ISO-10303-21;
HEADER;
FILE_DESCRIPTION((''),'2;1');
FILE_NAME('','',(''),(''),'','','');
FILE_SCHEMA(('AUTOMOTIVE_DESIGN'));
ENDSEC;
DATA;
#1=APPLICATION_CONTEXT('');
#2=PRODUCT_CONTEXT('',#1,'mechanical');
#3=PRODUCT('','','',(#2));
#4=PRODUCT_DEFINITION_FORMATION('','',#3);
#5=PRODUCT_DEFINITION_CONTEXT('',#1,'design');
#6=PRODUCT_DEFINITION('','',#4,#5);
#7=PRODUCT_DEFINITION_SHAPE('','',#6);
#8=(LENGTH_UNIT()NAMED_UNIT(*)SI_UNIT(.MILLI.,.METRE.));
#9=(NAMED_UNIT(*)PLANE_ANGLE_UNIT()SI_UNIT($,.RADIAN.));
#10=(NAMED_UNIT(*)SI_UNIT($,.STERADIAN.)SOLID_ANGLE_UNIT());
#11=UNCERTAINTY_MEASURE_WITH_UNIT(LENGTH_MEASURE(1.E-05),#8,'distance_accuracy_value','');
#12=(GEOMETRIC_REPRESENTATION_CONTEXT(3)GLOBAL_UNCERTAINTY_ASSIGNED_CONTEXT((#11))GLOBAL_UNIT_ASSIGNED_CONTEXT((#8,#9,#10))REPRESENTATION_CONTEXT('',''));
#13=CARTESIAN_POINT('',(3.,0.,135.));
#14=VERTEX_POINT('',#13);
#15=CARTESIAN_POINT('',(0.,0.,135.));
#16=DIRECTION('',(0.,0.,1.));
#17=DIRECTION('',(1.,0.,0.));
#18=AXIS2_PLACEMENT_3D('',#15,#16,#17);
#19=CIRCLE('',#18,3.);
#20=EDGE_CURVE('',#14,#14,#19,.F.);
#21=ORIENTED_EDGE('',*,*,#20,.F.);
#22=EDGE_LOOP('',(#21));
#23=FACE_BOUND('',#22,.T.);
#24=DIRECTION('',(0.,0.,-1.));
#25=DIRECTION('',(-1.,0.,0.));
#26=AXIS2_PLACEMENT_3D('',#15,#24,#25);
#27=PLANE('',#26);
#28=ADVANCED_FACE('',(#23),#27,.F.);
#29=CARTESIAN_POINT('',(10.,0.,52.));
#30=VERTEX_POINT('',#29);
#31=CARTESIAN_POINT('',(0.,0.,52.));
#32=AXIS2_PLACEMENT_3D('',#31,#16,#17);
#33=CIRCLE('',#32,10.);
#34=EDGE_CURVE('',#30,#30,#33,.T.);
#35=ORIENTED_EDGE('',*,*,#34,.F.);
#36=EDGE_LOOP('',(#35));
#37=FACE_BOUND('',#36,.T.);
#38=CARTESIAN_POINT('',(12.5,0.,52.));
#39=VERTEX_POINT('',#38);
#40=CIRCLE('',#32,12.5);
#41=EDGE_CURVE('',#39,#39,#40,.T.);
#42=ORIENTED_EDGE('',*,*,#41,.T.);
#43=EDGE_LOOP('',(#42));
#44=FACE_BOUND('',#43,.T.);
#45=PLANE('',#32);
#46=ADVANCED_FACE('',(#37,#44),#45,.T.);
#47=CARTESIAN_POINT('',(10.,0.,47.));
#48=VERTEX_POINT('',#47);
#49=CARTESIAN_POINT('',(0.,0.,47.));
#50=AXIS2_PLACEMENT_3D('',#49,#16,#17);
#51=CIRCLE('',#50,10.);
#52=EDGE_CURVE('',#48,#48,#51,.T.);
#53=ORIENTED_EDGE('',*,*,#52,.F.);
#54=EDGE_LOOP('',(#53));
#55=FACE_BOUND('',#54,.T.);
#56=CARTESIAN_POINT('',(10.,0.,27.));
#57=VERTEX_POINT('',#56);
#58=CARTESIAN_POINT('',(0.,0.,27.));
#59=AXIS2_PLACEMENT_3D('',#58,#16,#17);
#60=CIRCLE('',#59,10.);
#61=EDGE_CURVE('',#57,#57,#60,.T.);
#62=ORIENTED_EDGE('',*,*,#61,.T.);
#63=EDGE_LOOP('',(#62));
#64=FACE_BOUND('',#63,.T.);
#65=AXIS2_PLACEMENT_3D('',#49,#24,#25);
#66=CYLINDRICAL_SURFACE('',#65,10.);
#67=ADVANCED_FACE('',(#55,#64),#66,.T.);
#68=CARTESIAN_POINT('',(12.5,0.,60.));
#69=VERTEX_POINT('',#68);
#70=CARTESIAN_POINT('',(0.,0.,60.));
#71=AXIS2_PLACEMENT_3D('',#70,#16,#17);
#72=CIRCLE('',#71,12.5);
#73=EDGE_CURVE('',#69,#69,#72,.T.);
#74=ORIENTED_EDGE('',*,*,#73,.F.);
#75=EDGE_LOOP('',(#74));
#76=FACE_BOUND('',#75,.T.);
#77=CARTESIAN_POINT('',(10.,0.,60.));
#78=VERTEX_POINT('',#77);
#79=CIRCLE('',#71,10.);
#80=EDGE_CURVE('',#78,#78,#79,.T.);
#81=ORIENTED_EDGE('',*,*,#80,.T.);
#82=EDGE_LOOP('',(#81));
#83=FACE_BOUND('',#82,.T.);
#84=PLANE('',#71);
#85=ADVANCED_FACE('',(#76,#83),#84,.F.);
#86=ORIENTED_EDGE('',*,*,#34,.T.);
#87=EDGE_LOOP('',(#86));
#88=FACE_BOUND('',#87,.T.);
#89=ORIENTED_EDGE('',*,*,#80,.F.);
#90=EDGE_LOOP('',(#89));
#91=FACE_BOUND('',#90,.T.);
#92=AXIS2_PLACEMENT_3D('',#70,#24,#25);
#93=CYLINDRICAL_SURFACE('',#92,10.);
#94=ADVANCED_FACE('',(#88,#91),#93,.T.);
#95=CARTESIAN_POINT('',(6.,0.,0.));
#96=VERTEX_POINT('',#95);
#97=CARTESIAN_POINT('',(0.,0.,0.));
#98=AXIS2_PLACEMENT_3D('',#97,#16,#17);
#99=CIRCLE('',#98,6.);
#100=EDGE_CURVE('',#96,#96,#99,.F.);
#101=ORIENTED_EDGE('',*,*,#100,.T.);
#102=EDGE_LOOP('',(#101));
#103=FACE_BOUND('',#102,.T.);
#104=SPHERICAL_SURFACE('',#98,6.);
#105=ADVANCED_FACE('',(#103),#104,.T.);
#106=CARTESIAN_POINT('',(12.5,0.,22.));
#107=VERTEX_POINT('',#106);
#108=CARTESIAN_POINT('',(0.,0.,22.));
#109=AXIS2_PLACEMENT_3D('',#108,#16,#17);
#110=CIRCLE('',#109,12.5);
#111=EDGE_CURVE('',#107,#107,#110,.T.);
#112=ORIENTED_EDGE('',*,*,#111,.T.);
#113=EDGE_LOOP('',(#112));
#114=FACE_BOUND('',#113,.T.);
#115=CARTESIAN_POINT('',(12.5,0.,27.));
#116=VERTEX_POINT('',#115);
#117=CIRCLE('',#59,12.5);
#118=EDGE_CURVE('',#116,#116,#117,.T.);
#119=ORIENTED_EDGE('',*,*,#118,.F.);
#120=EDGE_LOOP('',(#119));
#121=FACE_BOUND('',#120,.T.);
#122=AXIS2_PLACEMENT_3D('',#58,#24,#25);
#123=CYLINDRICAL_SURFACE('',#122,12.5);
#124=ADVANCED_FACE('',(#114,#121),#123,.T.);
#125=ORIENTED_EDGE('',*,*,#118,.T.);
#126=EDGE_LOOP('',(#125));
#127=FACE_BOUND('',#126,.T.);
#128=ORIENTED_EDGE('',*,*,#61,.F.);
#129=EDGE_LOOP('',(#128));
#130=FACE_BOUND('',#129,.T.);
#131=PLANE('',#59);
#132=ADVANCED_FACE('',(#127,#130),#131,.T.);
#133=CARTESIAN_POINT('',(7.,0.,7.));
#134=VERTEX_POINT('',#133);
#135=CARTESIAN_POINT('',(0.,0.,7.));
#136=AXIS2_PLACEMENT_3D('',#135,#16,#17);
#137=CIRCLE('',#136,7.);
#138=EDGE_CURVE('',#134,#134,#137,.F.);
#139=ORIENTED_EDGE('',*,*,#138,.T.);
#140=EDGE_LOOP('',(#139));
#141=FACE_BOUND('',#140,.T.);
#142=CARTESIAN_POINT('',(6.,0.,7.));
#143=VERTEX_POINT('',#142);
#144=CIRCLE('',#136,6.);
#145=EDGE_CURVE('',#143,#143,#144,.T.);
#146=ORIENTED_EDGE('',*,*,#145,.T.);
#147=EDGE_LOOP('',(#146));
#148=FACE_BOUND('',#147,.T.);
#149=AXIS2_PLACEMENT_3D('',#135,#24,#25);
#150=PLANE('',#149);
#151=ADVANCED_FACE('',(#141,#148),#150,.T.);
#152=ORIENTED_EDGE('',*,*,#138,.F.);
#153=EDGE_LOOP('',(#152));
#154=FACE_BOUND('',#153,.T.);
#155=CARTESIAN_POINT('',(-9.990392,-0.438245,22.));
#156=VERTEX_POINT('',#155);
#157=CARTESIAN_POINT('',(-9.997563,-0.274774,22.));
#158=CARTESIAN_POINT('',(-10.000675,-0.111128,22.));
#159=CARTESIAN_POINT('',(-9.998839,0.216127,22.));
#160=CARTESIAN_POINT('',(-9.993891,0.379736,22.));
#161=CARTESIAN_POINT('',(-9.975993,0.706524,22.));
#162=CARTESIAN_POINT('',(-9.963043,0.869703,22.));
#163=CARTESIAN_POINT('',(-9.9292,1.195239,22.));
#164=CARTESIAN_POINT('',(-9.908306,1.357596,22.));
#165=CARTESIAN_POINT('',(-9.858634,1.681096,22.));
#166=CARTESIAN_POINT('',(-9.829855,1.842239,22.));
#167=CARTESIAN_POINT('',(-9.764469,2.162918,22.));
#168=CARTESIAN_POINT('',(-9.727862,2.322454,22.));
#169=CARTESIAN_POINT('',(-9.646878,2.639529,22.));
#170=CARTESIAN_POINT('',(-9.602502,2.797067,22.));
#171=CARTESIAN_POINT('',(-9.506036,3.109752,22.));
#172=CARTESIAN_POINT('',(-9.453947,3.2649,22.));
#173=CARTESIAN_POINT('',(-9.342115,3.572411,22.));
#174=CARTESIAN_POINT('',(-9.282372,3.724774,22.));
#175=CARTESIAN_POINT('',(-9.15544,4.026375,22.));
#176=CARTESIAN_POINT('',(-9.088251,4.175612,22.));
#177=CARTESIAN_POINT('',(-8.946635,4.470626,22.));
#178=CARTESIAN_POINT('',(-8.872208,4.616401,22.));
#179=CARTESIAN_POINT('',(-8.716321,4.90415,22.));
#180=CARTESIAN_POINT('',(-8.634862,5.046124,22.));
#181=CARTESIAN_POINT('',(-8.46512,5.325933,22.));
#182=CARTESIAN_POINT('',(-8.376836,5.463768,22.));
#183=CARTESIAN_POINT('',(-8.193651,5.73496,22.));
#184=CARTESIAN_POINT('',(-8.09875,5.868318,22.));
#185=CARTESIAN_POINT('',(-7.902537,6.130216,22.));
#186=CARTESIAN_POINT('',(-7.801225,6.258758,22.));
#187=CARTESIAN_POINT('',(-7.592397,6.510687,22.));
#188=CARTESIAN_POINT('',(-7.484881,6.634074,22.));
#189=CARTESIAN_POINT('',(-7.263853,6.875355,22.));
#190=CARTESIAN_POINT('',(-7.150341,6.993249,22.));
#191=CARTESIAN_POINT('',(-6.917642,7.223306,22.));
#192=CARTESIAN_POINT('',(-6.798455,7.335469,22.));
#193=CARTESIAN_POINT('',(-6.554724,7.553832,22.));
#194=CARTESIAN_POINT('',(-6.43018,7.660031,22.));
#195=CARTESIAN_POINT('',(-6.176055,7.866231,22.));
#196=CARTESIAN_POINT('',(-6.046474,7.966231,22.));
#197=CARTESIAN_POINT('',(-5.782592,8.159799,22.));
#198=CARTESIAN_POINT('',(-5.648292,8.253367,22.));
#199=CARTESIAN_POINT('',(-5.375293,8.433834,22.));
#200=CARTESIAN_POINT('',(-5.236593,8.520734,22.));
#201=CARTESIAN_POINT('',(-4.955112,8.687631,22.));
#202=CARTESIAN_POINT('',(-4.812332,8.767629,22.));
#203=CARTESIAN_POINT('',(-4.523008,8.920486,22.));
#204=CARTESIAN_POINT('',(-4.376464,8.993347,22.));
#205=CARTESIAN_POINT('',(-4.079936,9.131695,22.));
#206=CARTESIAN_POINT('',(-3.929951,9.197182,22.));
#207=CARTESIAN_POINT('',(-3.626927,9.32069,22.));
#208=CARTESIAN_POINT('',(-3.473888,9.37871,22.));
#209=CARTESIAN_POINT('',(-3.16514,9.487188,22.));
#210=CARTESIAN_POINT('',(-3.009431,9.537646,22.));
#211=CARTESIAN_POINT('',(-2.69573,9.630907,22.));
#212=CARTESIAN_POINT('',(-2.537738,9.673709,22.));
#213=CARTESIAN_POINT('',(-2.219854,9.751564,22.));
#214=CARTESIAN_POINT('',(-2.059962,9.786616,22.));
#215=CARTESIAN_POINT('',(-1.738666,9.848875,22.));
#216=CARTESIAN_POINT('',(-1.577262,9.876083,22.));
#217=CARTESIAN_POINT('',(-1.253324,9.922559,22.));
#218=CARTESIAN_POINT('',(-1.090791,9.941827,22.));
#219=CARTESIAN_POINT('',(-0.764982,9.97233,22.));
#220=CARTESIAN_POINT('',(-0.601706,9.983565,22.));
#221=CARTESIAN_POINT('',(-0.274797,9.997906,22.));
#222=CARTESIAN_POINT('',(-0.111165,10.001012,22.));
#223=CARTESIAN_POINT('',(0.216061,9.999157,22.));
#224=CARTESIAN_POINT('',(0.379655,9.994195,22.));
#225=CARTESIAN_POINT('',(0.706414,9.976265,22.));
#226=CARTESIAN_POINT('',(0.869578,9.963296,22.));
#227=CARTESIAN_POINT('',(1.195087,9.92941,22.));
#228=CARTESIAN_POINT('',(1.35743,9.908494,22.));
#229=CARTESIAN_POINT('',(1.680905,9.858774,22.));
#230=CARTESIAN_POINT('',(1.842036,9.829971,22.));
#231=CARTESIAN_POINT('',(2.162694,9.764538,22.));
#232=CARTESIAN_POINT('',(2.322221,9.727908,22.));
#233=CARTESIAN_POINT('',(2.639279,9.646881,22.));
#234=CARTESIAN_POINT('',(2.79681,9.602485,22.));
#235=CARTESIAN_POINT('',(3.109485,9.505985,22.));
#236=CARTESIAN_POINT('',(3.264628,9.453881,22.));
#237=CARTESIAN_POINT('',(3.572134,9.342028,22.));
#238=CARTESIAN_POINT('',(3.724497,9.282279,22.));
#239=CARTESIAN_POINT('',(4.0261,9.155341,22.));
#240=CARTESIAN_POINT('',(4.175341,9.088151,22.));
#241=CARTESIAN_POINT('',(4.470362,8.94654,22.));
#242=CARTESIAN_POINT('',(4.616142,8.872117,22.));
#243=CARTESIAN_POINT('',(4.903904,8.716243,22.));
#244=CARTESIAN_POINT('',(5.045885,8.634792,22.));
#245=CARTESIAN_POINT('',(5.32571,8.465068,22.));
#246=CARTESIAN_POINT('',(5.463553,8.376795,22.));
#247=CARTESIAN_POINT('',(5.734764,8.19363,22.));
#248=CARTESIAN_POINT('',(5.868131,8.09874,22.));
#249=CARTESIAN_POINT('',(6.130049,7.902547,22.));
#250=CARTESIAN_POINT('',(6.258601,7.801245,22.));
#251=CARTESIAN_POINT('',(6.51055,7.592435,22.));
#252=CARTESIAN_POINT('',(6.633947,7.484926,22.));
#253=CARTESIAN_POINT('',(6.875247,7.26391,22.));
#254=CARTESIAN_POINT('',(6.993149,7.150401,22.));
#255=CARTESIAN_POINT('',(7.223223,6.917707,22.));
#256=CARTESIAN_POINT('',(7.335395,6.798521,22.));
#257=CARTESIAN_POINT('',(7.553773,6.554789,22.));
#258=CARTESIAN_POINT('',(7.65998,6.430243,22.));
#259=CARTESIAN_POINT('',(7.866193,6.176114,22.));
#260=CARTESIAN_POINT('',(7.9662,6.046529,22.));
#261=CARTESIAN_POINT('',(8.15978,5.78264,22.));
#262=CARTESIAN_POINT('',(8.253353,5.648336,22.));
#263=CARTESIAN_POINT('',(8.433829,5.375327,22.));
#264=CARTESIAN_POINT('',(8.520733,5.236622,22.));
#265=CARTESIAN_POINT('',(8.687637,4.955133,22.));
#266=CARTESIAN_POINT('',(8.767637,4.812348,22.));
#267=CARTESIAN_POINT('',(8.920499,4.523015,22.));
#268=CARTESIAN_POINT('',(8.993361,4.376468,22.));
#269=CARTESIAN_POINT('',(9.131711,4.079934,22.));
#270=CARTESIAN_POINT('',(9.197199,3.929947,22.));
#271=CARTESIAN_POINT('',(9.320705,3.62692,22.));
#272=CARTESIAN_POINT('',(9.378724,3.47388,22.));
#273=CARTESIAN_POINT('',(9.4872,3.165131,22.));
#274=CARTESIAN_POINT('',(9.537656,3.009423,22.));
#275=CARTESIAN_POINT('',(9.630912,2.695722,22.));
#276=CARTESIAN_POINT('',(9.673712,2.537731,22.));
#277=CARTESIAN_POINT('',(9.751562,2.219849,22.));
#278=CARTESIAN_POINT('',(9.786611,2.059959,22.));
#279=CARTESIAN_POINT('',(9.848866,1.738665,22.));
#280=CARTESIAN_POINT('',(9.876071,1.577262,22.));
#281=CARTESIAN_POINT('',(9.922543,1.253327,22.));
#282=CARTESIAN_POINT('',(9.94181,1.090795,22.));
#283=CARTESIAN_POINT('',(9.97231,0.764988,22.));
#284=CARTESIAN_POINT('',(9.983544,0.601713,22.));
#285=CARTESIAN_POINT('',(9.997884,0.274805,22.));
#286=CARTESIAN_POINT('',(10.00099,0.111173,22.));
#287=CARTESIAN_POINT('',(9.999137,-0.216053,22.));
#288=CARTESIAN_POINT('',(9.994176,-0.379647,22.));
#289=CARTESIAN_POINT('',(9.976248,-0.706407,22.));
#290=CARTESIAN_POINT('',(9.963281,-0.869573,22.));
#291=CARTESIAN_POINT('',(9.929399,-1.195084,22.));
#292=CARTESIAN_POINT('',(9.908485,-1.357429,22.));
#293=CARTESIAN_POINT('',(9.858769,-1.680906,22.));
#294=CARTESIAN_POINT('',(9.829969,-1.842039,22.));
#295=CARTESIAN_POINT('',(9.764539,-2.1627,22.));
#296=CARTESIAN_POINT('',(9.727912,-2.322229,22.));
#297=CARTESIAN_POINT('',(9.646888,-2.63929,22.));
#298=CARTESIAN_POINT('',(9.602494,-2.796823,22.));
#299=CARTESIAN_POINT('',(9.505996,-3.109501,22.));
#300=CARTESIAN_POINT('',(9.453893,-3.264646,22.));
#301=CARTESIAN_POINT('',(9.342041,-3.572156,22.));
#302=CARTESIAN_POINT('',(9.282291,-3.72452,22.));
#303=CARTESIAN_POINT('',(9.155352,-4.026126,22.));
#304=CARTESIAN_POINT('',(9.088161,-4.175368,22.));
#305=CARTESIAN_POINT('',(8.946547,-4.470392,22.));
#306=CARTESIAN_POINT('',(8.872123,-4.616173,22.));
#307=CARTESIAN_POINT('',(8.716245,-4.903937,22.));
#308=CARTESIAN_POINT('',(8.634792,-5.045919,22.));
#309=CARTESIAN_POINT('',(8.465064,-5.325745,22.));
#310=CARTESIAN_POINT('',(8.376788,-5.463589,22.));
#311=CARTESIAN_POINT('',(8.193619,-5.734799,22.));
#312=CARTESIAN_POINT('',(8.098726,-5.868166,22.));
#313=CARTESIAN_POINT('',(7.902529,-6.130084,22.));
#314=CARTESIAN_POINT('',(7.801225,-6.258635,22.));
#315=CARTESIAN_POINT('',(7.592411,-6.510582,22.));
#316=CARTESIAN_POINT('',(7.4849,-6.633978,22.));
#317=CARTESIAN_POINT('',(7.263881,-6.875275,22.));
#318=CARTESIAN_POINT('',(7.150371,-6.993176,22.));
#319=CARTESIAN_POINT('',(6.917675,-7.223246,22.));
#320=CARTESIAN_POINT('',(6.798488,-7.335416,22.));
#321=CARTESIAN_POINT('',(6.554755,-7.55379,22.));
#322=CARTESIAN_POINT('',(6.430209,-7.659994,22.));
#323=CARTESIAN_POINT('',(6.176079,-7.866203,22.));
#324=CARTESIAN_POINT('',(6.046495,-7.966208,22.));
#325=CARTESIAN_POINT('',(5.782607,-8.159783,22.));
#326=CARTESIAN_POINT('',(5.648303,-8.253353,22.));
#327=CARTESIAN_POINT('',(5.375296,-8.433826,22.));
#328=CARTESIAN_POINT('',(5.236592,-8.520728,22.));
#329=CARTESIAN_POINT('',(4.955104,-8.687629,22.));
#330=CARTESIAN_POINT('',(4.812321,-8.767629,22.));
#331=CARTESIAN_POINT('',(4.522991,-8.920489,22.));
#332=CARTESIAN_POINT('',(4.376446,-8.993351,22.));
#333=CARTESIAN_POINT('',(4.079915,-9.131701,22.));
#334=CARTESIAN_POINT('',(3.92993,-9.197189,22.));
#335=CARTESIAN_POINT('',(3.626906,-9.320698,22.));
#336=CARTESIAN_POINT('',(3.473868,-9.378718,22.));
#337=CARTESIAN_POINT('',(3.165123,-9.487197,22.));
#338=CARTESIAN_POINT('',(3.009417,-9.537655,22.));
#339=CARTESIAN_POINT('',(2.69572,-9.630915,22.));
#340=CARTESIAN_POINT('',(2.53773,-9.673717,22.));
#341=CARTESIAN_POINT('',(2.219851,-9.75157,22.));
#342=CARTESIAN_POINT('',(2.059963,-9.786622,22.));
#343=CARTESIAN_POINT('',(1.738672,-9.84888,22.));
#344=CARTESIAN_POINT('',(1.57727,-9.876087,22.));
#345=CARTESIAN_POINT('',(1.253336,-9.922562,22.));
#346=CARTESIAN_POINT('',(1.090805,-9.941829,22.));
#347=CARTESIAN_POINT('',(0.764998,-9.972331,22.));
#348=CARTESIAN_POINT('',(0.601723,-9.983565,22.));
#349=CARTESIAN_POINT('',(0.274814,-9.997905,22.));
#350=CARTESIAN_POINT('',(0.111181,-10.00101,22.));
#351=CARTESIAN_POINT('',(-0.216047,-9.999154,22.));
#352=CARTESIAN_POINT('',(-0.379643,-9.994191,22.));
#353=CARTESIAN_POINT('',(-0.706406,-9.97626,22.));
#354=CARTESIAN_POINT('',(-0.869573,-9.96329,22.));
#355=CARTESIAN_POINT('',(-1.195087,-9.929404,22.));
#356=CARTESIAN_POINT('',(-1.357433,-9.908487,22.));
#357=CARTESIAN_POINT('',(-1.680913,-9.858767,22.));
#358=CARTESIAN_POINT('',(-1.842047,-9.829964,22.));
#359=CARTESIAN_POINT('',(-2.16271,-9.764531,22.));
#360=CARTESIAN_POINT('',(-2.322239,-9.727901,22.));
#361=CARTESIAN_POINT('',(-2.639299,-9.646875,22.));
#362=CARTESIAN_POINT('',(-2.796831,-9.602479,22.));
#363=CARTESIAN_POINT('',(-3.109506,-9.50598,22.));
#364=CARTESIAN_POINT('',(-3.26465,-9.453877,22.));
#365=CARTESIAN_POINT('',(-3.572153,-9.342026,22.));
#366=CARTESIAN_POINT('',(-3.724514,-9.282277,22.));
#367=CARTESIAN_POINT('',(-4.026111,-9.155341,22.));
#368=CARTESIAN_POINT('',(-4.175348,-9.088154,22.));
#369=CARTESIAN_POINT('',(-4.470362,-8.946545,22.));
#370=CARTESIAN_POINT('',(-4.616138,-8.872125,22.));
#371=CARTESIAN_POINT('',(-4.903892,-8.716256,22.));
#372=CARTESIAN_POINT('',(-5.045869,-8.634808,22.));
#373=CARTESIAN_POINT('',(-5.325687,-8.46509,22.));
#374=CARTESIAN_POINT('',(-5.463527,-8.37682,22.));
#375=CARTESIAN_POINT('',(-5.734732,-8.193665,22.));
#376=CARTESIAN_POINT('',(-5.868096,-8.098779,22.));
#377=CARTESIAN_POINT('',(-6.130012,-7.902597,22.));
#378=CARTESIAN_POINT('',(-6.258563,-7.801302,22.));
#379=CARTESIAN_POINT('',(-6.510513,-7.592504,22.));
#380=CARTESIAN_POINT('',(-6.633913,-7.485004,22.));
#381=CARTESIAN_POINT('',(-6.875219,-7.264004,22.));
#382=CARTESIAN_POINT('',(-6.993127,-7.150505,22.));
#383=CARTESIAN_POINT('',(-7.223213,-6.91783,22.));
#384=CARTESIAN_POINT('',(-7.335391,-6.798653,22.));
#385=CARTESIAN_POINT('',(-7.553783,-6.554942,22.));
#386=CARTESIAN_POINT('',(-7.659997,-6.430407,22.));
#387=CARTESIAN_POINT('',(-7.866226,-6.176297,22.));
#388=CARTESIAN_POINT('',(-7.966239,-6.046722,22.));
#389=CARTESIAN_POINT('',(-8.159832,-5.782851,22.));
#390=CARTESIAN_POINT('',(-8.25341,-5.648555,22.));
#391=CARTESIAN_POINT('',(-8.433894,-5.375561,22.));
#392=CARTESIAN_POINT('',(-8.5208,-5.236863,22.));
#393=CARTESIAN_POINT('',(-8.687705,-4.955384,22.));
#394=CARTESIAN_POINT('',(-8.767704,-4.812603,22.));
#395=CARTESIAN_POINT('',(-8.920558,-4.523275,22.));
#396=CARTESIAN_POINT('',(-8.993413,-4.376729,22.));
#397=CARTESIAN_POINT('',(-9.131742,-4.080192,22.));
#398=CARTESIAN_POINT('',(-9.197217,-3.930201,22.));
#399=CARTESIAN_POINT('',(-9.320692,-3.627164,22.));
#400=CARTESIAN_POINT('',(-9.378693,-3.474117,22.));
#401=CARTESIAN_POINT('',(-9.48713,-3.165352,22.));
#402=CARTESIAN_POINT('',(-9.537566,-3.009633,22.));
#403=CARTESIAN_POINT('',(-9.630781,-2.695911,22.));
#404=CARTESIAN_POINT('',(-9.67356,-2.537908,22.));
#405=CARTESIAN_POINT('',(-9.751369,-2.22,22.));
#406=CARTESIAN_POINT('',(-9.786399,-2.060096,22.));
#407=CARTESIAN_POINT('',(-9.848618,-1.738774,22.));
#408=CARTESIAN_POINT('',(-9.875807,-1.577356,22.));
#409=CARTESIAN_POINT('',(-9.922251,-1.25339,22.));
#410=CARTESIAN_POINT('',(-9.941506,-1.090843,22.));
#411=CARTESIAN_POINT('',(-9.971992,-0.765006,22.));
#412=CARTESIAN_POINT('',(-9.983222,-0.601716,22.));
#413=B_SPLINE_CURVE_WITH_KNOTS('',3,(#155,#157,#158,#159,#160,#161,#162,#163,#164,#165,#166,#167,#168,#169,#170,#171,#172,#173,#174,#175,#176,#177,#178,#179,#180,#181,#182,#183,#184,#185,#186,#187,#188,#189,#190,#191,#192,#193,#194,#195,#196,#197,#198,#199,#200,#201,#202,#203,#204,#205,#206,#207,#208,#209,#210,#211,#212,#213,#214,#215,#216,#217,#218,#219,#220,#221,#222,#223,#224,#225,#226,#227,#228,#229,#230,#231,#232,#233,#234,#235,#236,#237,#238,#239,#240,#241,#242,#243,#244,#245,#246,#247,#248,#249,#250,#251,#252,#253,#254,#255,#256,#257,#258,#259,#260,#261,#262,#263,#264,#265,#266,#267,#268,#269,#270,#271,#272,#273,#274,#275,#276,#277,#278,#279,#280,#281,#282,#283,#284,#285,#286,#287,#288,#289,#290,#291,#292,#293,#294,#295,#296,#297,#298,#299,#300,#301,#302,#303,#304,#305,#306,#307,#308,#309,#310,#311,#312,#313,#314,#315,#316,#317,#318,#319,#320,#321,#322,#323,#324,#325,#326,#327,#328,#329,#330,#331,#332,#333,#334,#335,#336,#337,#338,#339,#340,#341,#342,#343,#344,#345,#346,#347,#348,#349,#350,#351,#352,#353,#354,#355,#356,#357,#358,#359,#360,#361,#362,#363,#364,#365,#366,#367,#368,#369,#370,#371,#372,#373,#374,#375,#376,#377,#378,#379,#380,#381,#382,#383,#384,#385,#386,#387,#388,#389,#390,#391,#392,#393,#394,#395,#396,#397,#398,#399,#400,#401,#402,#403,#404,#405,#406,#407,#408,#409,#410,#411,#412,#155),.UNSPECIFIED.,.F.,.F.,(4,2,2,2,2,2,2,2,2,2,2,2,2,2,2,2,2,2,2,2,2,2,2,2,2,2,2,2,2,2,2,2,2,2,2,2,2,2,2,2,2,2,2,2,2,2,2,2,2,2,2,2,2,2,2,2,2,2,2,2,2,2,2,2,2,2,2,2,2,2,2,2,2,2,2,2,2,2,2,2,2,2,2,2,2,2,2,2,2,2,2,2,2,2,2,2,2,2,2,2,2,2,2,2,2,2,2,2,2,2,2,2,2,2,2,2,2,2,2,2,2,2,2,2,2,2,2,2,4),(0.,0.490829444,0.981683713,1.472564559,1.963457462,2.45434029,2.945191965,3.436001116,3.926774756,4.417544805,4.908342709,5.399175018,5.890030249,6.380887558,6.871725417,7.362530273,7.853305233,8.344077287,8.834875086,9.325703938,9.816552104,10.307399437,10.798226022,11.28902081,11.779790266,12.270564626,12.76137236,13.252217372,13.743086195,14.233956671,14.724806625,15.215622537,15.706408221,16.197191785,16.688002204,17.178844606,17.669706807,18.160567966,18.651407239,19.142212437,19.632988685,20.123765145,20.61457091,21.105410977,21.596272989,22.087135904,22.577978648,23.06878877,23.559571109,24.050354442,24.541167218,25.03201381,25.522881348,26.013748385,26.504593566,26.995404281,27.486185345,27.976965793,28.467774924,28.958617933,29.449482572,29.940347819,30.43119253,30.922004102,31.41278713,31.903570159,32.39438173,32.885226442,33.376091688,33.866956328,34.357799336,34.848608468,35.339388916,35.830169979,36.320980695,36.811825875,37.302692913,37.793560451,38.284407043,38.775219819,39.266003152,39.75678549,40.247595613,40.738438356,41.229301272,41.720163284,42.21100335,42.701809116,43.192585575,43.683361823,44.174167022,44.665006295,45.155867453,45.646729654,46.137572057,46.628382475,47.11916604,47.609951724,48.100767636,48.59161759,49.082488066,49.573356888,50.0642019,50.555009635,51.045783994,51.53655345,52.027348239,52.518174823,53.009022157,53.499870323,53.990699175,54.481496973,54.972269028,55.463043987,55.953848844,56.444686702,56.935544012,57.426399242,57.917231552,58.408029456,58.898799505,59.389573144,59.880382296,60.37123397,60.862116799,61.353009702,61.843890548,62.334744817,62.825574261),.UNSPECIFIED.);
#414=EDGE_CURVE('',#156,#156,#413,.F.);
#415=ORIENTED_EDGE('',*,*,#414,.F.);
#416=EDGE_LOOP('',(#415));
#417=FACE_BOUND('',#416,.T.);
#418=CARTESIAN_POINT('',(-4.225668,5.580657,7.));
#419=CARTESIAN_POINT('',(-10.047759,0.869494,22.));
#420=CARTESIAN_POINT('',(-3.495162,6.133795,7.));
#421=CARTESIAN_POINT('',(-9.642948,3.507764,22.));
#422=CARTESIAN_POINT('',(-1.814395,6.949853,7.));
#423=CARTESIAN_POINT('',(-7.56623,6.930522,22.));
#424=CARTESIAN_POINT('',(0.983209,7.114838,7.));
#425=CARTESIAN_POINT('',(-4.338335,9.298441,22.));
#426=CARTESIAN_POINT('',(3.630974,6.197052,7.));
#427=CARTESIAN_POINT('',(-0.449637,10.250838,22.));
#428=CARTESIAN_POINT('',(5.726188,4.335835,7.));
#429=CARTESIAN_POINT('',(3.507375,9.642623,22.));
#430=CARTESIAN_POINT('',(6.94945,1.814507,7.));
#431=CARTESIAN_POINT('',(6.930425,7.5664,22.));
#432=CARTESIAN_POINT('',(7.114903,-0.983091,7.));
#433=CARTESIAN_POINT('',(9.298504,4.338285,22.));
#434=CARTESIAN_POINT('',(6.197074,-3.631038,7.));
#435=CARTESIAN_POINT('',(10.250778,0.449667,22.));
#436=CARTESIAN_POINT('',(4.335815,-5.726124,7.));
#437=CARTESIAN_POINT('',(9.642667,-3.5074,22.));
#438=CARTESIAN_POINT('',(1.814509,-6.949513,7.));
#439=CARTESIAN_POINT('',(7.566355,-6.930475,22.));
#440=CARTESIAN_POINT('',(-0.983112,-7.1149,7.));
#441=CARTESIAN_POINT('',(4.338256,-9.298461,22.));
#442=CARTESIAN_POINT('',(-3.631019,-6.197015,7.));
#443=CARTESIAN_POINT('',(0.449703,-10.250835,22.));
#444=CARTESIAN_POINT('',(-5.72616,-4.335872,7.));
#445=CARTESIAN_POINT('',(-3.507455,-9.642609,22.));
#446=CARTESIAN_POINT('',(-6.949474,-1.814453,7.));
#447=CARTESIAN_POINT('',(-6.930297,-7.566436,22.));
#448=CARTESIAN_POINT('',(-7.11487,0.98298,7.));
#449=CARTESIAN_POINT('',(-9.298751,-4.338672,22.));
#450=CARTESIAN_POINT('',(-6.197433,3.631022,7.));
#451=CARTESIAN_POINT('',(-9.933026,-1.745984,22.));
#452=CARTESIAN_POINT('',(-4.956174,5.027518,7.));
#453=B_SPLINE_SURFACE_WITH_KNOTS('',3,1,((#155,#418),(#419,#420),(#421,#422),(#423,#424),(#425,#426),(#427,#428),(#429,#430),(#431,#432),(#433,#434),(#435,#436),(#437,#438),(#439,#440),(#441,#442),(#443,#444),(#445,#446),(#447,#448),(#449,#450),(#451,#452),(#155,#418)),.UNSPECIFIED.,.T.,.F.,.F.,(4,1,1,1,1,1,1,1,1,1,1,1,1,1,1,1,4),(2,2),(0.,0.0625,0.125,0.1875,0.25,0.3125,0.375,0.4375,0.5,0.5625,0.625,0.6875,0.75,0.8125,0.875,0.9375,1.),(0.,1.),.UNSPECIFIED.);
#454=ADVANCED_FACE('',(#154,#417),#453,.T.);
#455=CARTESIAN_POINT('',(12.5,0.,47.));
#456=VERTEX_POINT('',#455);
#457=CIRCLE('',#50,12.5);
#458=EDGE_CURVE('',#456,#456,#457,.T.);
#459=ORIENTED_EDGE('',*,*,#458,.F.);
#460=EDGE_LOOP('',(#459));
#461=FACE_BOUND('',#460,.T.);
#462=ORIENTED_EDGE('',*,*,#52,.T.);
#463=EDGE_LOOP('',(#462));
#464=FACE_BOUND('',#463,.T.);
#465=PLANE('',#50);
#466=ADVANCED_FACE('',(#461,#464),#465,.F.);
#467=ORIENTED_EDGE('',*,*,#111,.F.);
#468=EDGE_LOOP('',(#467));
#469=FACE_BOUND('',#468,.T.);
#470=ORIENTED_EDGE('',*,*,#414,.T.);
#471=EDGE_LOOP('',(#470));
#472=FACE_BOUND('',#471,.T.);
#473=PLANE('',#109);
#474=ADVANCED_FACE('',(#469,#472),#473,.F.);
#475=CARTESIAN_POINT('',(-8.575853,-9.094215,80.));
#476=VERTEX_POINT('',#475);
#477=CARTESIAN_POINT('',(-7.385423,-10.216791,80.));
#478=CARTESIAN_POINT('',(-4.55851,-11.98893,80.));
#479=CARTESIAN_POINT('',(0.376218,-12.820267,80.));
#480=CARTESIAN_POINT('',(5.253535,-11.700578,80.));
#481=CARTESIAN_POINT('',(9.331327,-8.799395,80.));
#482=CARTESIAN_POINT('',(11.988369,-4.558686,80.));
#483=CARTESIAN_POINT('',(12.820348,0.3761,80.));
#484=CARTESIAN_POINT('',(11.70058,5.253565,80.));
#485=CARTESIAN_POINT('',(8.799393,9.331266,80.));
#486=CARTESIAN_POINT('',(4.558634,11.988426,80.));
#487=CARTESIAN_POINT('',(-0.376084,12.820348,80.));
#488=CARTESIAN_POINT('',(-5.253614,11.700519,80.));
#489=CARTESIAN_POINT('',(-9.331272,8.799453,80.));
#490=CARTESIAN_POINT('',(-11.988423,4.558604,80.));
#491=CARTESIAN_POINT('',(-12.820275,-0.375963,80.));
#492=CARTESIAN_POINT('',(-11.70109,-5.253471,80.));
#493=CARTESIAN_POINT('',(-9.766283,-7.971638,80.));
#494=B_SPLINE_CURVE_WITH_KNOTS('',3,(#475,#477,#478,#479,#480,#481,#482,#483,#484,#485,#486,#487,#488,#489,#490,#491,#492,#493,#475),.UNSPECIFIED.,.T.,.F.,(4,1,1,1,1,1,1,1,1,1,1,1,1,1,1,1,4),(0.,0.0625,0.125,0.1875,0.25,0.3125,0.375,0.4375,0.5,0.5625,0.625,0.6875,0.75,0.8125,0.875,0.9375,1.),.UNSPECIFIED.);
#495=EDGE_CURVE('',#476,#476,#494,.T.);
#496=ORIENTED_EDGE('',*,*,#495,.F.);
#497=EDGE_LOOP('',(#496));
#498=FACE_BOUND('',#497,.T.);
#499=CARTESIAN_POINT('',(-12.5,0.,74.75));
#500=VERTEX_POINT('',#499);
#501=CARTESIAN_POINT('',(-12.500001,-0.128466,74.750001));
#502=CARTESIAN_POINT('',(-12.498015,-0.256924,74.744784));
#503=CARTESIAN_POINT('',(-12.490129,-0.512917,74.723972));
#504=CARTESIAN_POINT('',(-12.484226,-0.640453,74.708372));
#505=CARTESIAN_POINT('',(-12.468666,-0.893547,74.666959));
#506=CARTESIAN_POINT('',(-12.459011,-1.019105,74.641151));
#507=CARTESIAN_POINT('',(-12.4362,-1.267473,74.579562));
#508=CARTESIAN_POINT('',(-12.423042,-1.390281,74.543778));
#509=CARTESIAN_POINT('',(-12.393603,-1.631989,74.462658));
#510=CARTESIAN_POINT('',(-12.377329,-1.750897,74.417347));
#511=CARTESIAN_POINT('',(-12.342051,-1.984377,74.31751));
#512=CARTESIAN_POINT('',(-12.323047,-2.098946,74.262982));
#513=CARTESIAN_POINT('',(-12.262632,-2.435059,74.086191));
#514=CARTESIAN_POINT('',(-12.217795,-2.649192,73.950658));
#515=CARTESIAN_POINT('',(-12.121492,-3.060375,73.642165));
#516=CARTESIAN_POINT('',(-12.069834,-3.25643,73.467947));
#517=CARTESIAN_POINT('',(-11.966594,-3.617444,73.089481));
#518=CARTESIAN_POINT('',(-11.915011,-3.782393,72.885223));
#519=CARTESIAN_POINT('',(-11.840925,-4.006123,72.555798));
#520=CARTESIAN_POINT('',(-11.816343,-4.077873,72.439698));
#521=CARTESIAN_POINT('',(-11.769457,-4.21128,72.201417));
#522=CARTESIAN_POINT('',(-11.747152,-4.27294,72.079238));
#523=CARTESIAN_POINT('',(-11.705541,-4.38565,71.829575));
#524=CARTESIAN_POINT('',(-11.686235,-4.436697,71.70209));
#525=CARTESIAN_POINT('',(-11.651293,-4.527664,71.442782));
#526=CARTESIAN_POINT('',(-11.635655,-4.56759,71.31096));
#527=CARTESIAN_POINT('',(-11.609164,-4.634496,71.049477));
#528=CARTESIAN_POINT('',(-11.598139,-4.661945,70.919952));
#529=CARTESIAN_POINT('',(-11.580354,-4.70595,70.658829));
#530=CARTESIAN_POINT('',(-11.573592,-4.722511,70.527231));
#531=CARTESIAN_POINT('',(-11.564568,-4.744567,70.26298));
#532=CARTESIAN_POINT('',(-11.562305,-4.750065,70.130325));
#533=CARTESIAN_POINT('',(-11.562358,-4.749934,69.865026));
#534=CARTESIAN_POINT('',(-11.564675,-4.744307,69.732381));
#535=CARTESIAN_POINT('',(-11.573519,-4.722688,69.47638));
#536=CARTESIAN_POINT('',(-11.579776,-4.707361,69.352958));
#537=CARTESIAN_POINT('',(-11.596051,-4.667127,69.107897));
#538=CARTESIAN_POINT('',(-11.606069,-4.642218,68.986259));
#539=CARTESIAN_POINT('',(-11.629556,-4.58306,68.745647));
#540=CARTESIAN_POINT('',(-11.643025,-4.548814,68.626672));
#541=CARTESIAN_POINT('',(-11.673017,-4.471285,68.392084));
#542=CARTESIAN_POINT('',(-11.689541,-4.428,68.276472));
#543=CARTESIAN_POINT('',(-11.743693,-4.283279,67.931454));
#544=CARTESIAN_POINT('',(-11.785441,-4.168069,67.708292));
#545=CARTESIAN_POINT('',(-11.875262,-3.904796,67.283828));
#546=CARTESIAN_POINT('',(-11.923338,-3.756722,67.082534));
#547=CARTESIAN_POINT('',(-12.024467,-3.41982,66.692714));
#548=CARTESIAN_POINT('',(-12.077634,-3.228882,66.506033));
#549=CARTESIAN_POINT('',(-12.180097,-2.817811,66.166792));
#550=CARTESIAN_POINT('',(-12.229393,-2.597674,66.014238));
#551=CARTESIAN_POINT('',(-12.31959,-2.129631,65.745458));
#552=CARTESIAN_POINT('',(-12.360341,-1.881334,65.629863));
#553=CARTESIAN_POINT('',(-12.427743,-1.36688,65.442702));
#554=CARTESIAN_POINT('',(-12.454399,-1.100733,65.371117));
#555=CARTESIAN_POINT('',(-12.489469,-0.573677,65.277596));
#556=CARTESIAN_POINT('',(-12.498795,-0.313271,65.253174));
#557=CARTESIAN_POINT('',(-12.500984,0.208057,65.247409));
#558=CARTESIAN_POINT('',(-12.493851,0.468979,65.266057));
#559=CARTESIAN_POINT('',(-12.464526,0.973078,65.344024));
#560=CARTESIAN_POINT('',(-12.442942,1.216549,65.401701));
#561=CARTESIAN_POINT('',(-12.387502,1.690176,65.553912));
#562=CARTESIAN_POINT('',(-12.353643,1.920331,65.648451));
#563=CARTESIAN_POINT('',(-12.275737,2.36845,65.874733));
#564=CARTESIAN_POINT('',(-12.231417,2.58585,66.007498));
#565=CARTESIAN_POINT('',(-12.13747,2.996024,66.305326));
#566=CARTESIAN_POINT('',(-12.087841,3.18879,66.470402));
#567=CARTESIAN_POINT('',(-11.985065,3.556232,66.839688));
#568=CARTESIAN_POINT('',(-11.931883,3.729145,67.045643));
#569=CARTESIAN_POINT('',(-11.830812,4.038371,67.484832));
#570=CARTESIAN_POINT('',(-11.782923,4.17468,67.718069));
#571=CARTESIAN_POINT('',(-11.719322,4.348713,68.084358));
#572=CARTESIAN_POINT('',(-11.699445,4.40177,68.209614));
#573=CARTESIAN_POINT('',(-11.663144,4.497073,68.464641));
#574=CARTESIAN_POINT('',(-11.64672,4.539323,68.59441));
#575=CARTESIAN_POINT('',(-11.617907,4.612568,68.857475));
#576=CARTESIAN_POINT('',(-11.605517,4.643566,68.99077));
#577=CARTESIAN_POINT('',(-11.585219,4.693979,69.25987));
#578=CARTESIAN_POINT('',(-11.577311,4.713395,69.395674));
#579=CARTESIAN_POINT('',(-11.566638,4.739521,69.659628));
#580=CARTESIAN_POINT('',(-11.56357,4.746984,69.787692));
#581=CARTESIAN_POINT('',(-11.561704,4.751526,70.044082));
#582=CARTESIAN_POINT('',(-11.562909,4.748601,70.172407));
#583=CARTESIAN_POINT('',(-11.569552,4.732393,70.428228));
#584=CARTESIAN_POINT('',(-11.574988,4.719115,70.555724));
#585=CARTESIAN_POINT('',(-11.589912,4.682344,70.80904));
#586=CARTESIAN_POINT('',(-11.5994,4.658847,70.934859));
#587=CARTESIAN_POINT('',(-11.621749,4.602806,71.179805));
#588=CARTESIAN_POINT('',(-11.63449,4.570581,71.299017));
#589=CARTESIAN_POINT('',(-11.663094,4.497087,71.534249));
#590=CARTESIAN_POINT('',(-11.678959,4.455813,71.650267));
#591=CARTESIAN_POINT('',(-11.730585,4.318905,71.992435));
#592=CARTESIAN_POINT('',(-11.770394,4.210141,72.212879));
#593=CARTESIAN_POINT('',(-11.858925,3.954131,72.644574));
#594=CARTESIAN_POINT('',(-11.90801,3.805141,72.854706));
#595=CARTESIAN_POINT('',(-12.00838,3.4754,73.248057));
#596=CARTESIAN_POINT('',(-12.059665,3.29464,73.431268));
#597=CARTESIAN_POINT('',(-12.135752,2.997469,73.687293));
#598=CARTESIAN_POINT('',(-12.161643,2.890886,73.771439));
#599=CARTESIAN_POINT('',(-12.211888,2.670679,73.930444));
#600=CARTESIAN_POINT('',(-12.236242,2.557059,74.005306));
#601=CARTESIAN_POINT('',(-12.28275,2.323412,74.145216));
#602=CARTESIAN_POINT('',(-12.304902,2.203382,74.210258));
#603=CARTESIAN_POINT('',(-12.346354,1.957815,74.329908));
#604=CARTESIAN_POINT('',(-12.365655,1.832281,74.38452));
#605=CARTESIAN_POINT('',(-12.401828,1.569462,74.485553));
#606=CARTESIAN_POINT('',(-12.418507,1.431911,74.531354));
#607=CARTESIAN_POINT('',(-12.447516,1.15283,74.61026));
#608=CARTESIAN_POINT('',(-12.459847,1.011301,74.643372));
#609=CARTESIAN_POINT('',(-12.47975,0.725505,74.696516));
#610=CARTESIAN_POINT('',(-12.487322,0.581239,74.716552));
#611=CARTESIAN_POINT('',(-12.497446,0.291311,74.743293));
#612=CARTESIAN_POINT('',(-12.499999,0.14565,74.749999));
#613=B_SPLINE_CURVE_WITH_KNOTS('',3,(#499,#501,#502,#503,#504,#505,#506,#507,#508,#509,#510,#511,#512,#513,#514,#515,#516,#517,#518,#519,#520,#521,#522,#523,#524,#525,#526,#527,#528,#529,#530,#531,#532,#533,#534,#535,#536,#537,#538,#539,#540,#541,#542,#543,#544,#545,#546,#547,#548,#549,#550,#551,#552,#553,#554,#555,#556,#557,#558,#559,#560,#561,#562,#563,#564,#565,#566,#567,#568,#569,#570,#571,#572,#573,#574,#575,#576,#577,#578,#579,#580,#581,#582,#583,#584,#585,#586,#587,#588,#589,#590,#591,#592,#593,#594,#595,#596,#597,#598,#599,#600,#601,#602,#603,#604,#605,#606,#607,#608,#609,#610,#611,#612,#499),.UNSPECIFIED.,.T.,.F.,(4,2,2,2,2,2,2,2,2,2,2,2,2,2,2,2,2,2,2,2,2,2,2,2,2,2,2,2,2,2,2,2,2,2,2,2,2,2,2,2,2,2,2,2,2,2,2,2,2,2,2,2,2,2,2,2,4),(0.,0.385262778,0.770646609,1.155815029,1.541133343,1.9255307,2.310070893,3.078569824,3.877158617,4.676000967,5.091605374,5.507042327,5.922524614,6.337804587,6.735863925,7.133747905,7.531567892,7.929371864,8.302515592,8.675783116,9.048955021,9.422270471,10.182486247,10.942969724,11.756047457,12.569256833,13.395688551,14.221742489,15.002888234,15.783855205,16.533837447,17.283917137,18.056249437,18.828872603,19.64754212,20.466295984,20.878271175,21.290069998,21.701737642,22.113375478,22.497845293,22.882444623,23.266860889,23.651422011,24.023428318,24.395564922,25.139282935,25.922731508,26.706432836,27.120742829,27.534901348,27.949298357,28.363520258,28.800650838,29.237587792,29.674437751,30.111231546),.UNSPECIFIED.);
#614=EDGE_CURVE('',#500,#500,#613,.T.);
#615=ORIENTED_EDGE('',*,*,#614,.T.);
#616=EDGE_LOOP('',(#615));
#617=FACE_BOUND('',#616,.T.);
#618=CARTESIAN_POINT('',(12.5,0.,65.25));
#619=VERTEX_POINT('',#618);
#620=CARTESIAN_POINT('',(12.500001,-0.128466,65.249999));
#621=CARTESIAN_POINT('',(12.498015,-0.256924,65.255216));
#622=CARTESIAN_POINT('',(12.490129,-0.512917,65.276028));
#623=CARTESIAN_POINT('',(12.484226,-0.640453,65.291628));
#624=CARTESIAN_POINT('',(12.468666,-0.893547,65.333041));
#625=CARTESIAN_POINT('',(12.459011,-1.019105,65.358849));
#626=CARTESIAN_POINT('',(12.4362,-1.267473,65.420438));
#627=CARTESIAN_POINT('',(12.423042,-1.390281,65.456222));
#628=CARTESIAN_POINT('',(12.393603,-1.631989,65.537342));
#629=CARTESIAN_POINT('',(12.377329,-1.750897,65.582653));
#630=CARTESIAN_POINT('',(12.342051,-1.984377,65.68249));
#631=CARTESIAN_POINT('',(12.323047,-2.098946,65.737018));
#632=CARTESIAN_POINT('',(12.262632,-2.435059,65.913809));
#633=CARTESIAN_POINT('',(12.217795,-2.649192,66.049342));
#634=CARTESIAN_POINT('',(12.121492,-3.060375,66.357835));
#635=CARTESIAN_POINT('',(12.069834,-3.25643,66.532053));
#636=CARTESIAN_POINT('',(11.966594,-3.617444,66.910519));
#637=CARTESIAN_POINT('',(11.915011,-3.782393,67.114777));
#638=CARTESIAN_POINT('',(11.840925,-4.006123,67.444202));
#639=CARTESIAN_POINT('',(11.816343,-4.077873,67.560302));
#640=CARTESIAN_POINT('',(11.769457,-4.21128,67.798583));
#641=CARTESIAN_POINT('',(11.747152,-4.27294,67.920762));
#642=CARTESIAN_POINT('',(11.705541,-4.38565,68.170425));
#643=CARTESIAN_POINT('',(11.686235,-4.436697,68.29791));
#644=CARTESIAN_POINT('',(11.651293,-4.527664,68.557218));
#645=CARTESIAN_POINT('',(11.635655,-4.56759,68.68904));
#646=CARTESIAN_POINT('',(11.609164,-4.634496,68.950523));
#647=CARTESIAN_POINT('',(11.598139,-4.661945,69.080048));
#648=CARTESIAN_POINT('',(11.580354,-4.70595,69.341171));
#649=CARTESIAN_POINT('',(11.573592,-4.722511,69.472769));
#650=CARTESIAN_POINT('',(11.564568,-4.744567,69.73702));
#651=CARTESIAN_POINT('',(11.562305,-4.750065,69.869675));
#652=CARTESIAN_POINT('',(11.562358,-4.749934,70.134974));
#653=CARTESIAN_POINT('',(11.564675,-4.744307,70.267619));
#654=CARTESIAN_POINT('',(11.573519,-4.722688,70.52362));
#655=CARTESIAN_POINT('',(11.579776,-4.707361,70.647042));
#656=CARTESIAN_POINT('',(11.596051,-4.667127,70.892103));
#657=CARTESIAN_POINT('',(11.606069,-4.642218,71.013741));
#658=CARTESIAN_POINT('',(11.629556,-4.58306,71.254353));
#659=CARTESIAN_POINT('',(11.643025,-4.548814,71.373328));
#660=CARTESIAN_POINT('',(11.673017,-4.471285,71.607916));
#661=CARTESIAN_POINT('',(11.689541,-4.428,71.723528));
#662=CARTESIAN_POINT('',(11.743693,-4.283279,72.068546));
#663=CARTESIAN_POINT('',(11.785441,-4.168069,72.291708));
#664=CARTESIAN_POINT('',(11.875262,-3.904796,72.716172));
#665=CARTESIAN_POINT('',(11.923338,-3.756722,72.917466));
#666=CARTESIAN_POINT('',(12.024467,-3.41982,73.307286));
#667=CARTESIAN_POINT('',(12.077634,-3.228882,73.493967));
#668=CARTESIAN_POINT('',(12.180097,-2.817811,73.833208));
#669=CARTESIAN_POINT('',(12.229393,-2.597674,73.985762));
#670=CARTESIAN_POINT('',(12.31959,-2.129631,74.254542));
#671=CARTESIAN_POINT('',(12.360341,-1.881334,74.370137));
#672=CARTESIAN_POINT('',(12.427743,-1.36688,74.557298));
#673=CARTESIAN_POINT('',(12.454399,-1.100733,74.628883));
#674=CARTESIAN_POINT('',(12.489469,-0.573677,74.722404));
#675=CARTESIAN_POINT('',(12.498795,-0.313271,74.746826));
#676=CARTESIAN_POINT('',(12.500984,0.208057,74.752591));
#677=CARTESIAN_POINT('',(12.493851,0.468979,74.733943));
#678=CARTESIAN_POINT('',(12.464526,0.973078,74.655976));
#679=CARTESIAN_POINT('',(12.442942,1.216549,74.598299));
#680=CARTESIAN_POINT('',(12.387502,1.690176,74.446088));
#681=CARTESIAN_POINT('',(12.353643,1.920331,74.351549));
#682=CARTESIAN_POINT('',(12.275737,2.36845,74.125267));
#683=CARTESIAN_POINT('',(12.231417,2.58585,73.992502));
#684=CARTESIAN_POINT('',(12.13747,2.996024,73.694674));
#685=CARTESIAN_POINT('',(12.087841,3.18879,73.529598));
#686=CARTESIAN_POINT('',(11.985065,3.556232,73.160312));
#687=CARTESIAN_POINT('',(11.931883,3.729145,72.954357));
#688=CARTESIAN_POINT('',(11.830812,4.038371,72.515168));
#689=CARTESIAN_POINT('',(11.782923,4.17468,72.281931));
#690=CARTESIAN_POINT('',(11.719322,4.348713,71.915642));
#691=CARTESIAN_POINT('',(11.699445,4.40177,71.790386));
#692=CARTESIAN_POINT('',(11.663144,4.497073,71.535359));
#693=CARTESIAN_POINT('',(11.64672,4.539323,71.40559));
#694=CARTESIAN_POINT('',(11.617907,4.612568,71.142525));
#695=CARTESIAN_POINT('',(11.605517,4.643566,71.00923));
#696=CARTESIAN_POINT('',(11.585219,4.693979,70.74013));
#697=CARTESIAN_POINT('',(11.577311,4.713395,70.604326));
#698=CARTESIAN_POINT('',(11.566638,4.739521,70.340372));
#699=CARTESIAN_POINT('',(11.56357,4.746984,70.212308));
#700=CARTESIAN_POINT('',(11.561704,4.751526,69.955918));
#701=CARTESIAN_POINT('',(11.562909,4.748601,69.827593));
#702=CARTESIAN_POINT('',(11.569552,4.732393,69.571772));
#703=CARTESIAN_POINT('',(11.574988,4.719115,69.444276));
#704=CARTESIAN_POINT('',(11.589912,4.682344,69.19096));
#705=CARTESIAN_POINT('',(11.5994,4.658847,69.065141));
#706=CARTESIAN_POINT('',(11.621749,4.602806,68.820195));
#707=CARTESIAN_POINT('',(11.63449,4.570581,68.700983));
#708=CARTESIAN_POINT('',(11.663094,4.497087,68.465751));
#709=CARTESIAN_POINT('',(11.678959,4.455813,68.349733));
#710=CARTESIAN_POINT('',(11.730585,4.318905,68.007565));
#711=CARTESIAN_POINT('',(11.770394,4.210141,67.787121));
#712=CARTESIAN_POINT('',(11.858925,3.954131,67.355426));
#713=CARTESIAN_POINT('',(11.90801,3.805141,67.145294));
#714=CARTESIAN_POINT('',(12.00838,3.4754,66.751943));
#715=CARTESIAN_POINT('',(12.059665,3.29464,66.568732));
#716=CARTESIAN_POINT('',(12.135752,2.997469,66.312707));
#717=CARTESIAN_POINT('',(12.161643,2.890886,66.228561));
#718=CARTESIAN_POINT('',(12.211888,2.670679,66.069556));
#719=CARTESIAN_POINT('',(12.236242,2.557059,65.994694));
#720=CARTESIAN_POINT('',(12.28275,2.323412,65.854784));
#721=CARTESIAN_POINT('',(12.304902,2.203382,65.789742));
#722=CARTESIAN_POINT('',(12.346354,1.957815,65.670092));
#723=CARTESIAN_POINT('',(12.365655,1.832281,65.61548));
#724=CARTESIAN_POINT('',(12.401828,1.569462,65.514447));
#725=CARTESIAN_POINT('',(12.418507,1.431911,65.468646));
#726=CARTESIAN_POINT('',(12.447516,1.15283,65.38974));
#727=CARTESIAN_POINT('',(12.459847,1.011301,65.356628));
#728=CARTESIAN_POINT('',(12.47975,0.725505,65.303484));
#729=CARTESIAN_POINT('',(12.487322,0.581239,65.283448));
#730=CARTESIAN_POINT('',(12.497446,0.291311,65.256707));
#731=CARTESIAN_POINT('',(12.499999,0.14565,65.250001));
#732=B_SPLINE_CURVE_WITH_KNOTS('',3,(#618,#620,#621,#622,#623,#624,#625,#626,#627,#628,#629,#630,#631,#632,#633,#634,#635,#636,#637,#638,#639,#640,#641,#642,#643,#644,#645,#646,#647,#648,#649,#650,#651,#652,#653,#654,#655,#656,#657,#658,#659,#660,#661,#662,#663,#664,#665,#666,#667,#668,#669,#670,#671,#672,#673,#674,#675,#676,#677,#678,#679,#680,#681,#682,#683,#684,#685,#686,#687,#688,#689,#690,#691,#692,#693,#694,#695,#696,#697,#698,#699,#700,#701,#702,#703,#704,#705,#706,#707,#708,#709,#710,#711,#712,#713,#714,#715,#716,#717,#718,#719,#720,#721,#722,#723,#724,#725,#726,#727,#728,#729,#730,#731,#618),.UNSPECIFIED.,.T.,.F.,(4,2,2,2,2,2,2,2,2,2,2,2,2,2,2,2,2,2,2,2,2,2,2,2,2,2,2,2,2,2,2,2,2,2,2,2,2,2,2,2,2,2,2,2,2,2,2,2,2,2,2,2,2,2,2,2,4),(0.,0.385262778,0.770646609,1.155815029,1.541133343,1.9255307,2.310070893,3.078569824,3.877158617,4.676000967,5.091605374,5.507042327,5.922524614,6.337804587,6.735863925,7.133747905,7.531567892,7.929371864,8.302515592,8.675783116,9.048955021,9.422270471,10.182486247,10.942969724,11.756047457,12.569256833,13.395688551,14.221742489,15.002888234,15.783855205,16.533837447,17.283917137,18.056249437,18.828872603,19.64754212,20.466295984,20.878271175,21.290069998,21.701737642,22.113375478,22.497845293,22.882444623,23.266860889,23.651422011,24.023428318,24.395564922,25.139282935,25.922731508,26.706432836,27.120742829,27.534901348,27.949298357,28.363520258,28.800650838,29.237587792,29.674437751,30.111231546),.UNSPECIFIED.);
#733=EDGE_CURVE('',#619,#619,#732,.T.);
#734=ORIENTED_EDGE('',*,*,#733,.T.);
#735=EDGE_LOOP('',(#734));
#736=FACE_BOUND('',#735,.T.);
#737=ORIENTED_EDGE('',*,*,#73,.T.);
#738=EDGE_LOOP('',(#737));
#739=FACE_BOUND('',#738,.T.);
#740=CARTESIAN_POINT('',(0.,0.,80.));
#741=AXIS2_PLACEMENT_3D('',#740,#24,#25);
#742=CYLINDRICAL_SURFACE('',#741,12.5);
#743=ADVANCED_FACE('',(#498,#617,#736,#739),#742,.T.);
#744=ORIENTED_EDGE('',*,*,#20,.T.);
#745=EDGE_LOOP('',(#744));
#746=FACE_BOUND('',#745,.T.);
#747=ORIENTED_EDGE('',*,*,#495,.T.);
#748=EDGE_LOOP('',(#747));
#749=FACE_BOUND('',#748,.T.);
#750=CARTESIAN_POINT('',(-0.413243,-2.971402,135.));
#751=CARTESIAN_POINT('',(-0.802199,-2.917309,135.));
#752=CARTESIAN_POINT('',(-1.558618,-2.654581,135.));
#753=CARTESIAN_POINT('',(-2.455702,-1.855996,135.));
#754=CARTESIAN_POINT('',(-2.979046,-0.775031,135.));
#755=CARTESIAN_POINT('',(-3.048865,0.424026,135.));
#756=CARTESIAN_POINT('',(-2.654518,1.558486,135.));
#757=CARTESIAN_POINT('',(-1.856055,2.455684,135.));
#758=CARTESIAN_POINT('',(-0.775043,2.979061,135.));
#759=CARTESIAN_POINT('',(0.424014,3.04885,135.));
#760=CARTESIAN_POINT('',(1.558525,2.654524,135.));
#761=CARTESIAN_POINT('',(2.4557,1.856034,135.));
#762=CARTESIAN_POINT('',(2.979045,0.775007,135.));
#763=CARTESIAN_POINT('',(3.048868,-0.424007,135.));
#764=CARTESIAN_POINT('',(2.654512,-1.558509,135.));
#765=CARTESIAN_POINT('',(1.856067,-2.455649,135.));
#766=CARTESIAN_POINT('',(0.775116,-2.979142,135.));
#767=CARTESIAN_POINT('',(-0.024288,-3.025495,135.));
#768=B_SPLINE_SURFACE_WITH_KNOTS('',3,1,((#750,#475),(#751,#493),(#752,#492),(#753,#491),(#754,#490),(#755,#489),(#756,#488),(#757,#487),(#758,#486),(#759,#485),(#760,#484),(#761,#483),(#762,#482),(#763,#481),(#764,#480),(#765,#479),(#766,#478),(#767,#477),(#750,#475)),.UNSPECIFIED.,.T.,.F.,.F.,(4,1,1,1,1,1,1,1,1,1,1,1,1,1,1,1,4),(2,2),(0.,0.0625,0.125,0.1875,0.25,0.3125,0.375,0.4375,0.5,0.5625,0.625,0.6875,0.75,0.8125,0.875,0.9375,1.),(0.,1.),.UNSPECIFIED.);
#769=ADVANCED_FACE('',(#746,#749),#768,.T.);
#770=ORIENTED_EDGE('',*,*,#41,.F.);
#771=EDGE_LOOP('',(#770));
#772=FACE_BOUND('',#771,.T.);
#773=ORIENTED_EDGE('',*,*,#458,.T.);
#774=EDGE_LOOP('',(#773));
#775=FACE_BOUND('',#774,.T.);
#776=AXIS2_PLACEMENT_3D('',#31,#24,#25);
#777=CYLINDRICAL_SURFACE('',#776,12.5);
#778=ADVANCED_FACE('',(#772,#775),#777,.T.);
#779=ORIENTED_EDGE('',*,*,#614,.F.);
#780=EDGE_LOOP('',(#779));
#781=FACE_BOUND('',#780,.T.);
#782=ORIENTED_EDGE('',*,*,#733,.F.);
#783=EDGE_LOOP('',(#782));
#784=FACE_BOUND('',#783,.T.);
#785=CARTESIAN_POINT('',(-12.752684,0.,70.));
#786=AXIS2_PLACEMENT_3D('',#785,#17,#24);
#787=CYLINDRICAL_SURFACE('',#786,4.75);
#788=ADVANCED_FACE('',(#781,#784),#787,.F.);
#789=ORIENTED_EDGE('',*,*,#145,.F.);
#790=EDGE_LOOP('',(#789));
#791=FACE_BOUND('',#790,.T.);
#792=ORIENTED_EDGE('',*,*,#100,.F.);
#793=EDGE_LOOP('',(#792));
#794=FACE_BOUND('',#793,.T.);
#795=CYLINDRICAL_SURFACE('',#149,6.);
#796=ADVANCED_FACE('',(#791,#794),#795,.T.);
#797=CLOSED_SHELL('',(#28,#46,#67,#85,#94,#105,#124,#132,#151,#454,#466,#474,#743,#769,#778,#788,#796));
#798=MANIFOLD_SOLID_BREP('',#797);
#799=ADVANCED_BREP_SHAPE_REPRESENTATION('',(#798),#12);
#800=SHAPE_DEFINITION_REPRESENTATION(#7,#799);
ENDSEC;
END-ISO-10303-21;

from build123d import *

# Parameters (mm, degrees)
SKETCH1_R               = 6
BOSS_EXTRUDE1_DEPTH     = 7
SKETCH4_R               = 12.5
BOSS_EXTRUDE2_DEPTH     = 5
SKETCH5_R               = 10
BOSS_EXTRUDE3_DEPTH     = 20
SKETCH6_R               = 12.5
BOSS_EXTRUDE4_DEPTH     = 5
SKETCH7_R               = 10
BOSS_EXTRUDE5_DEPTH     = 8
SKETCH8_R               = 12.5
BOSS_EXTRUDE6_DEPTH     = 20
CUT_EXTRUDE1_DEPTH      = 137.152564497
CUT_EXTRUDE1_DEPTH_BACK = 137.152564497
SKETCH12_R              = 4.75


with BuildPart() as part:
    # Sketch1 → Boss-Extrude1 (new body)
    with BuildSketch(Plane.XY):
        Circle(SKETCH1_R)
    extrude(amount=BOSS_EXTRUDE1_DEPTH)

    # Boundary1: read off the stored shape, not the designer's step
    # Boundary1: loft between two sections, ruled curve by curve
    boundary1_from = [
        Edge.make_bspline([(-9.990392453, -0.438244947, 22), (-10.047758582, 0.869494367, 22), (-9.642947539, 3.507763614, 22), (-7.566229655, 6.930521615, 22), (-4.338335116, 9.298440939, 22), (-0.449636643, 10.250837553, 22), (3.507374728, 9.642622793, 22), (6.930425472, 7.566400094, 22), (9.298503644, 4.338285256, 22), (10.250777835, 0.449667179, 22), (9.642667481, -3.507399725, 22), (7.566354672, -6.930475061, 22), (4.338256441, -9.298461316, 22), (0.449702826, -10.25083465, 22), (-3.507454885, -9.642609382, 22), (-6.930296859, -7.566435522, 22), (-9.298750763, -4.33867227, 22), (-9.933026324, -1.745984261, 22), (-9.990392453, -0.438244947, 22)], [0, 0, 0, 0, 0.0625, 0.125, 0.1875, 0.25, 0.3125, 0.375, 0.4375, 0.5, 0.5625, 0.625, 0.6875, 0.75, 0.8125, 0.875, 0.9375, 1, 1, 1, 1], 3),
    ]
    boundary1_to = [
        Edge.make_bspline([(-4.22566792, 5.580656828, 7), (-3.49516165, 6.133795465, 7), (-1.81439525, 6.949853324, 7), (0.983209382, 7.114837867, 7), (3.63097391, 6.197052468, 7), (5.726187747, 4.335834577, 7), (6.949450421, 1.814506667, 7), (7.11490288, -0.983090952, 7), (6.197074461, -3.631038197, 7), (4.335815401, -5.72612384, 7), (1.814508513, -6.949512869, 7), (-0.983112034, -7.114899967, 7), (-3.631019486, -6.197014853, 7), (-5.726159627, -4.335871713, 7), (-6.949474267, -1.814452599, 7), (-7.114869505, 0.982980413, 7), (-6.197432873, 3.6310215, 7), (-4.956174191, 5.02751819, 7), (-4.22566792, 5.580656828, 7)], [0, 0, 0, 0, 0.0625, 0.125, 0.1875, 0.25, 0.3125, 0.375, 0.4375, 0.5, 0.5625, 0.625, 0.6875, 0.75, 0.8125, 0.875, 0.9375, 1, 1, 1, 1], 3),
    ]
    boundary1 = Solid(Shell([*[Face.make_surface_from_curves(boundary1_from[k], boundary1_to[k]) for k in range(1)], Face(Wire(boundary1_from)), Face(Wire(boundary1_to))]))
    add(boundary1)

    # Sketch4 → Boss-Extrude2 (add)
    with BuildSketch(Plane.XY.offset(22)):
        Circle(SKETCH4_R)
    extrude(amount=BOSS_EXTRUDE2_DEPTH)

    # Sketch5 → Boss-Extrude3 (add)
    with BuildSketch(Plane.XY.offset(27)):
        Circle(SKETCH5_R)
    extrude(amount=BOSS_EXTRUDE3_DEPTH)

    # Sketch6 → Boss-Extrude4 (add)
    with BuildSketch(Plane.XY.offset(47)):
        Circle(SKETCH6_R)
    extrude(amount=BOSS_EXTRUDE4_DEPTH)

    # Sketch7 → Boss-Extrude5 (add)
    with BuildSketch(Plane.XY.offset(52)):
        Circle(SKETCH7_R)
    extrude(amount=BOSS_EXTRUDE5_DEPTH)

    # Sketch8 → Boss-Extrude6 (add)
    with BuildSketch(Plane.XY.offset(60)):
        Circle(SKETCH8_R)
    extrude(amount=BOSS_EXTRUDE6_DEPTH)

    # Boundary2: read off the stored shape, not the designer's step
    # Boundary2: loft between two sections, ruled curve by curve
    boundary2_from = [
        Edge.make_bspline([(-0.413243211, -2.971402034, 135), (-0.802198828, -2.917308624, 135), (-1.558617548, -2.654581098, 135), (-2.455702084, -1.855996132, 135), (-2.979045824, -0.775030925, 135), (-3.048865186, 0.4240263, 135), (-2.654518323, 1.558486334, 135), (-1.856054801, 2.455684477, 135), (-0.775042701, 2.979060904, 135), (0.424014143, 3.048849818, 135), (1.558524876, 2.654523549, 135), (2.455700435, 1.856033687, 135), (2.97904536, 0.775007047, 135), (3.04886792, -0.424006642, 135), (2.654512254, -1.558509432, 135), (1.856066634, -2.455648798, 135), (0.775116152, -2.979141557, 135), (-0.024287594, -3.025495444, 135), (-0.413243211, -2.971402034, 135)], [0, 0, 0, 0, 0.0625, 0.125, 0.1875, 0.25, 0.3125, 0.375, 0.4375, 0.5, 0.5625, 0.625, 0.6875, 0.75, 0.8125, 0.875, 0.9375, 1, 1, 1, 1], 3),
    ]
    boundary2_to = [
        Edge.make_bspline([(-8.575853055, -9.094214886, 80), (-9.766282999, -7.971638346, 80), (-11.701089645, -5.253470626, 80), (-12.820274794, -0.375962681, 80), (-11.988422629, 4.558603883, 80), (-9.331271608, 8.799453385, 80), (-5.253613651, 11.700519429, 80), (-0.376084461, 12.82034826, 80), (4.558634158, 11.988426255, 80), (8.79939251, 9.331266038, 80), (11.700579622, 5.253565072, 80), (12.820347791, 0.376100432, 80), (11.988369013, -4.558686182, 80), (9.331327134, -8.799394503, 80), (5.253534637, -11.700577777, 80), (0.376217696, -12.820267313, 80), (-4.558509976, -11.988929864, 80), (-7.38542311, -10.216791425, 80), (-8.575853055, -9.094214886, 80)], [0, 0, 0, 0, 0.0625, 0.125, 0.1875, 0.25, 0.3125, 0.375, 0.4375, 0.5, 0.5625, 0.625, 0.6875, 0.75, 0.8125, 0.875, 0.9375, 1, 1, 1, 1], 3),
    ]
    boundary2 = Solid(Shell([*[Face.make_surface_from_curves(boundary2_from[k], boundary2_to[k]) for k in range(1)], Face(Wire(boundary2_from)), Face(Wire(boundary2_to))]))
    add(boundary2)

    # Sketch12 → Cut-Extrude1 (cut, two sides: drawn at the far end of the back side and taken through both)
    with BuildSketch(Plane(origin=(0, 0, 0), x_dir=(0, 0, -1), z_dir=(1, 0, 0)).offset(-CUT_EXTRUDE1_DEPTH_BACK)):
        with Locations((-70, 0)):
            Circle(SKETCH12_R)
    extrude(amount=CUT_EXTRUDE1_DEPTH + CUT_EXTRUDE1_DEPTH_BACK, mode=Mode.SUBTRACT)

    # Sketch17 → Revolve1 (revolve)
    with BuildSketch(Plane(origin=(0, 0, 0), x_dir=(0, 0, -1), z_dir=(1, 0, 0))):
        with BuildLine():
            Line((0, 6), (0, -6))
            ThreePointArc((0, -6), (6, 0), (0, 6))
        make_face()
    revolve(axis=Axis((0, 6, 0), (0, -1, 0)))


solid = part.part
